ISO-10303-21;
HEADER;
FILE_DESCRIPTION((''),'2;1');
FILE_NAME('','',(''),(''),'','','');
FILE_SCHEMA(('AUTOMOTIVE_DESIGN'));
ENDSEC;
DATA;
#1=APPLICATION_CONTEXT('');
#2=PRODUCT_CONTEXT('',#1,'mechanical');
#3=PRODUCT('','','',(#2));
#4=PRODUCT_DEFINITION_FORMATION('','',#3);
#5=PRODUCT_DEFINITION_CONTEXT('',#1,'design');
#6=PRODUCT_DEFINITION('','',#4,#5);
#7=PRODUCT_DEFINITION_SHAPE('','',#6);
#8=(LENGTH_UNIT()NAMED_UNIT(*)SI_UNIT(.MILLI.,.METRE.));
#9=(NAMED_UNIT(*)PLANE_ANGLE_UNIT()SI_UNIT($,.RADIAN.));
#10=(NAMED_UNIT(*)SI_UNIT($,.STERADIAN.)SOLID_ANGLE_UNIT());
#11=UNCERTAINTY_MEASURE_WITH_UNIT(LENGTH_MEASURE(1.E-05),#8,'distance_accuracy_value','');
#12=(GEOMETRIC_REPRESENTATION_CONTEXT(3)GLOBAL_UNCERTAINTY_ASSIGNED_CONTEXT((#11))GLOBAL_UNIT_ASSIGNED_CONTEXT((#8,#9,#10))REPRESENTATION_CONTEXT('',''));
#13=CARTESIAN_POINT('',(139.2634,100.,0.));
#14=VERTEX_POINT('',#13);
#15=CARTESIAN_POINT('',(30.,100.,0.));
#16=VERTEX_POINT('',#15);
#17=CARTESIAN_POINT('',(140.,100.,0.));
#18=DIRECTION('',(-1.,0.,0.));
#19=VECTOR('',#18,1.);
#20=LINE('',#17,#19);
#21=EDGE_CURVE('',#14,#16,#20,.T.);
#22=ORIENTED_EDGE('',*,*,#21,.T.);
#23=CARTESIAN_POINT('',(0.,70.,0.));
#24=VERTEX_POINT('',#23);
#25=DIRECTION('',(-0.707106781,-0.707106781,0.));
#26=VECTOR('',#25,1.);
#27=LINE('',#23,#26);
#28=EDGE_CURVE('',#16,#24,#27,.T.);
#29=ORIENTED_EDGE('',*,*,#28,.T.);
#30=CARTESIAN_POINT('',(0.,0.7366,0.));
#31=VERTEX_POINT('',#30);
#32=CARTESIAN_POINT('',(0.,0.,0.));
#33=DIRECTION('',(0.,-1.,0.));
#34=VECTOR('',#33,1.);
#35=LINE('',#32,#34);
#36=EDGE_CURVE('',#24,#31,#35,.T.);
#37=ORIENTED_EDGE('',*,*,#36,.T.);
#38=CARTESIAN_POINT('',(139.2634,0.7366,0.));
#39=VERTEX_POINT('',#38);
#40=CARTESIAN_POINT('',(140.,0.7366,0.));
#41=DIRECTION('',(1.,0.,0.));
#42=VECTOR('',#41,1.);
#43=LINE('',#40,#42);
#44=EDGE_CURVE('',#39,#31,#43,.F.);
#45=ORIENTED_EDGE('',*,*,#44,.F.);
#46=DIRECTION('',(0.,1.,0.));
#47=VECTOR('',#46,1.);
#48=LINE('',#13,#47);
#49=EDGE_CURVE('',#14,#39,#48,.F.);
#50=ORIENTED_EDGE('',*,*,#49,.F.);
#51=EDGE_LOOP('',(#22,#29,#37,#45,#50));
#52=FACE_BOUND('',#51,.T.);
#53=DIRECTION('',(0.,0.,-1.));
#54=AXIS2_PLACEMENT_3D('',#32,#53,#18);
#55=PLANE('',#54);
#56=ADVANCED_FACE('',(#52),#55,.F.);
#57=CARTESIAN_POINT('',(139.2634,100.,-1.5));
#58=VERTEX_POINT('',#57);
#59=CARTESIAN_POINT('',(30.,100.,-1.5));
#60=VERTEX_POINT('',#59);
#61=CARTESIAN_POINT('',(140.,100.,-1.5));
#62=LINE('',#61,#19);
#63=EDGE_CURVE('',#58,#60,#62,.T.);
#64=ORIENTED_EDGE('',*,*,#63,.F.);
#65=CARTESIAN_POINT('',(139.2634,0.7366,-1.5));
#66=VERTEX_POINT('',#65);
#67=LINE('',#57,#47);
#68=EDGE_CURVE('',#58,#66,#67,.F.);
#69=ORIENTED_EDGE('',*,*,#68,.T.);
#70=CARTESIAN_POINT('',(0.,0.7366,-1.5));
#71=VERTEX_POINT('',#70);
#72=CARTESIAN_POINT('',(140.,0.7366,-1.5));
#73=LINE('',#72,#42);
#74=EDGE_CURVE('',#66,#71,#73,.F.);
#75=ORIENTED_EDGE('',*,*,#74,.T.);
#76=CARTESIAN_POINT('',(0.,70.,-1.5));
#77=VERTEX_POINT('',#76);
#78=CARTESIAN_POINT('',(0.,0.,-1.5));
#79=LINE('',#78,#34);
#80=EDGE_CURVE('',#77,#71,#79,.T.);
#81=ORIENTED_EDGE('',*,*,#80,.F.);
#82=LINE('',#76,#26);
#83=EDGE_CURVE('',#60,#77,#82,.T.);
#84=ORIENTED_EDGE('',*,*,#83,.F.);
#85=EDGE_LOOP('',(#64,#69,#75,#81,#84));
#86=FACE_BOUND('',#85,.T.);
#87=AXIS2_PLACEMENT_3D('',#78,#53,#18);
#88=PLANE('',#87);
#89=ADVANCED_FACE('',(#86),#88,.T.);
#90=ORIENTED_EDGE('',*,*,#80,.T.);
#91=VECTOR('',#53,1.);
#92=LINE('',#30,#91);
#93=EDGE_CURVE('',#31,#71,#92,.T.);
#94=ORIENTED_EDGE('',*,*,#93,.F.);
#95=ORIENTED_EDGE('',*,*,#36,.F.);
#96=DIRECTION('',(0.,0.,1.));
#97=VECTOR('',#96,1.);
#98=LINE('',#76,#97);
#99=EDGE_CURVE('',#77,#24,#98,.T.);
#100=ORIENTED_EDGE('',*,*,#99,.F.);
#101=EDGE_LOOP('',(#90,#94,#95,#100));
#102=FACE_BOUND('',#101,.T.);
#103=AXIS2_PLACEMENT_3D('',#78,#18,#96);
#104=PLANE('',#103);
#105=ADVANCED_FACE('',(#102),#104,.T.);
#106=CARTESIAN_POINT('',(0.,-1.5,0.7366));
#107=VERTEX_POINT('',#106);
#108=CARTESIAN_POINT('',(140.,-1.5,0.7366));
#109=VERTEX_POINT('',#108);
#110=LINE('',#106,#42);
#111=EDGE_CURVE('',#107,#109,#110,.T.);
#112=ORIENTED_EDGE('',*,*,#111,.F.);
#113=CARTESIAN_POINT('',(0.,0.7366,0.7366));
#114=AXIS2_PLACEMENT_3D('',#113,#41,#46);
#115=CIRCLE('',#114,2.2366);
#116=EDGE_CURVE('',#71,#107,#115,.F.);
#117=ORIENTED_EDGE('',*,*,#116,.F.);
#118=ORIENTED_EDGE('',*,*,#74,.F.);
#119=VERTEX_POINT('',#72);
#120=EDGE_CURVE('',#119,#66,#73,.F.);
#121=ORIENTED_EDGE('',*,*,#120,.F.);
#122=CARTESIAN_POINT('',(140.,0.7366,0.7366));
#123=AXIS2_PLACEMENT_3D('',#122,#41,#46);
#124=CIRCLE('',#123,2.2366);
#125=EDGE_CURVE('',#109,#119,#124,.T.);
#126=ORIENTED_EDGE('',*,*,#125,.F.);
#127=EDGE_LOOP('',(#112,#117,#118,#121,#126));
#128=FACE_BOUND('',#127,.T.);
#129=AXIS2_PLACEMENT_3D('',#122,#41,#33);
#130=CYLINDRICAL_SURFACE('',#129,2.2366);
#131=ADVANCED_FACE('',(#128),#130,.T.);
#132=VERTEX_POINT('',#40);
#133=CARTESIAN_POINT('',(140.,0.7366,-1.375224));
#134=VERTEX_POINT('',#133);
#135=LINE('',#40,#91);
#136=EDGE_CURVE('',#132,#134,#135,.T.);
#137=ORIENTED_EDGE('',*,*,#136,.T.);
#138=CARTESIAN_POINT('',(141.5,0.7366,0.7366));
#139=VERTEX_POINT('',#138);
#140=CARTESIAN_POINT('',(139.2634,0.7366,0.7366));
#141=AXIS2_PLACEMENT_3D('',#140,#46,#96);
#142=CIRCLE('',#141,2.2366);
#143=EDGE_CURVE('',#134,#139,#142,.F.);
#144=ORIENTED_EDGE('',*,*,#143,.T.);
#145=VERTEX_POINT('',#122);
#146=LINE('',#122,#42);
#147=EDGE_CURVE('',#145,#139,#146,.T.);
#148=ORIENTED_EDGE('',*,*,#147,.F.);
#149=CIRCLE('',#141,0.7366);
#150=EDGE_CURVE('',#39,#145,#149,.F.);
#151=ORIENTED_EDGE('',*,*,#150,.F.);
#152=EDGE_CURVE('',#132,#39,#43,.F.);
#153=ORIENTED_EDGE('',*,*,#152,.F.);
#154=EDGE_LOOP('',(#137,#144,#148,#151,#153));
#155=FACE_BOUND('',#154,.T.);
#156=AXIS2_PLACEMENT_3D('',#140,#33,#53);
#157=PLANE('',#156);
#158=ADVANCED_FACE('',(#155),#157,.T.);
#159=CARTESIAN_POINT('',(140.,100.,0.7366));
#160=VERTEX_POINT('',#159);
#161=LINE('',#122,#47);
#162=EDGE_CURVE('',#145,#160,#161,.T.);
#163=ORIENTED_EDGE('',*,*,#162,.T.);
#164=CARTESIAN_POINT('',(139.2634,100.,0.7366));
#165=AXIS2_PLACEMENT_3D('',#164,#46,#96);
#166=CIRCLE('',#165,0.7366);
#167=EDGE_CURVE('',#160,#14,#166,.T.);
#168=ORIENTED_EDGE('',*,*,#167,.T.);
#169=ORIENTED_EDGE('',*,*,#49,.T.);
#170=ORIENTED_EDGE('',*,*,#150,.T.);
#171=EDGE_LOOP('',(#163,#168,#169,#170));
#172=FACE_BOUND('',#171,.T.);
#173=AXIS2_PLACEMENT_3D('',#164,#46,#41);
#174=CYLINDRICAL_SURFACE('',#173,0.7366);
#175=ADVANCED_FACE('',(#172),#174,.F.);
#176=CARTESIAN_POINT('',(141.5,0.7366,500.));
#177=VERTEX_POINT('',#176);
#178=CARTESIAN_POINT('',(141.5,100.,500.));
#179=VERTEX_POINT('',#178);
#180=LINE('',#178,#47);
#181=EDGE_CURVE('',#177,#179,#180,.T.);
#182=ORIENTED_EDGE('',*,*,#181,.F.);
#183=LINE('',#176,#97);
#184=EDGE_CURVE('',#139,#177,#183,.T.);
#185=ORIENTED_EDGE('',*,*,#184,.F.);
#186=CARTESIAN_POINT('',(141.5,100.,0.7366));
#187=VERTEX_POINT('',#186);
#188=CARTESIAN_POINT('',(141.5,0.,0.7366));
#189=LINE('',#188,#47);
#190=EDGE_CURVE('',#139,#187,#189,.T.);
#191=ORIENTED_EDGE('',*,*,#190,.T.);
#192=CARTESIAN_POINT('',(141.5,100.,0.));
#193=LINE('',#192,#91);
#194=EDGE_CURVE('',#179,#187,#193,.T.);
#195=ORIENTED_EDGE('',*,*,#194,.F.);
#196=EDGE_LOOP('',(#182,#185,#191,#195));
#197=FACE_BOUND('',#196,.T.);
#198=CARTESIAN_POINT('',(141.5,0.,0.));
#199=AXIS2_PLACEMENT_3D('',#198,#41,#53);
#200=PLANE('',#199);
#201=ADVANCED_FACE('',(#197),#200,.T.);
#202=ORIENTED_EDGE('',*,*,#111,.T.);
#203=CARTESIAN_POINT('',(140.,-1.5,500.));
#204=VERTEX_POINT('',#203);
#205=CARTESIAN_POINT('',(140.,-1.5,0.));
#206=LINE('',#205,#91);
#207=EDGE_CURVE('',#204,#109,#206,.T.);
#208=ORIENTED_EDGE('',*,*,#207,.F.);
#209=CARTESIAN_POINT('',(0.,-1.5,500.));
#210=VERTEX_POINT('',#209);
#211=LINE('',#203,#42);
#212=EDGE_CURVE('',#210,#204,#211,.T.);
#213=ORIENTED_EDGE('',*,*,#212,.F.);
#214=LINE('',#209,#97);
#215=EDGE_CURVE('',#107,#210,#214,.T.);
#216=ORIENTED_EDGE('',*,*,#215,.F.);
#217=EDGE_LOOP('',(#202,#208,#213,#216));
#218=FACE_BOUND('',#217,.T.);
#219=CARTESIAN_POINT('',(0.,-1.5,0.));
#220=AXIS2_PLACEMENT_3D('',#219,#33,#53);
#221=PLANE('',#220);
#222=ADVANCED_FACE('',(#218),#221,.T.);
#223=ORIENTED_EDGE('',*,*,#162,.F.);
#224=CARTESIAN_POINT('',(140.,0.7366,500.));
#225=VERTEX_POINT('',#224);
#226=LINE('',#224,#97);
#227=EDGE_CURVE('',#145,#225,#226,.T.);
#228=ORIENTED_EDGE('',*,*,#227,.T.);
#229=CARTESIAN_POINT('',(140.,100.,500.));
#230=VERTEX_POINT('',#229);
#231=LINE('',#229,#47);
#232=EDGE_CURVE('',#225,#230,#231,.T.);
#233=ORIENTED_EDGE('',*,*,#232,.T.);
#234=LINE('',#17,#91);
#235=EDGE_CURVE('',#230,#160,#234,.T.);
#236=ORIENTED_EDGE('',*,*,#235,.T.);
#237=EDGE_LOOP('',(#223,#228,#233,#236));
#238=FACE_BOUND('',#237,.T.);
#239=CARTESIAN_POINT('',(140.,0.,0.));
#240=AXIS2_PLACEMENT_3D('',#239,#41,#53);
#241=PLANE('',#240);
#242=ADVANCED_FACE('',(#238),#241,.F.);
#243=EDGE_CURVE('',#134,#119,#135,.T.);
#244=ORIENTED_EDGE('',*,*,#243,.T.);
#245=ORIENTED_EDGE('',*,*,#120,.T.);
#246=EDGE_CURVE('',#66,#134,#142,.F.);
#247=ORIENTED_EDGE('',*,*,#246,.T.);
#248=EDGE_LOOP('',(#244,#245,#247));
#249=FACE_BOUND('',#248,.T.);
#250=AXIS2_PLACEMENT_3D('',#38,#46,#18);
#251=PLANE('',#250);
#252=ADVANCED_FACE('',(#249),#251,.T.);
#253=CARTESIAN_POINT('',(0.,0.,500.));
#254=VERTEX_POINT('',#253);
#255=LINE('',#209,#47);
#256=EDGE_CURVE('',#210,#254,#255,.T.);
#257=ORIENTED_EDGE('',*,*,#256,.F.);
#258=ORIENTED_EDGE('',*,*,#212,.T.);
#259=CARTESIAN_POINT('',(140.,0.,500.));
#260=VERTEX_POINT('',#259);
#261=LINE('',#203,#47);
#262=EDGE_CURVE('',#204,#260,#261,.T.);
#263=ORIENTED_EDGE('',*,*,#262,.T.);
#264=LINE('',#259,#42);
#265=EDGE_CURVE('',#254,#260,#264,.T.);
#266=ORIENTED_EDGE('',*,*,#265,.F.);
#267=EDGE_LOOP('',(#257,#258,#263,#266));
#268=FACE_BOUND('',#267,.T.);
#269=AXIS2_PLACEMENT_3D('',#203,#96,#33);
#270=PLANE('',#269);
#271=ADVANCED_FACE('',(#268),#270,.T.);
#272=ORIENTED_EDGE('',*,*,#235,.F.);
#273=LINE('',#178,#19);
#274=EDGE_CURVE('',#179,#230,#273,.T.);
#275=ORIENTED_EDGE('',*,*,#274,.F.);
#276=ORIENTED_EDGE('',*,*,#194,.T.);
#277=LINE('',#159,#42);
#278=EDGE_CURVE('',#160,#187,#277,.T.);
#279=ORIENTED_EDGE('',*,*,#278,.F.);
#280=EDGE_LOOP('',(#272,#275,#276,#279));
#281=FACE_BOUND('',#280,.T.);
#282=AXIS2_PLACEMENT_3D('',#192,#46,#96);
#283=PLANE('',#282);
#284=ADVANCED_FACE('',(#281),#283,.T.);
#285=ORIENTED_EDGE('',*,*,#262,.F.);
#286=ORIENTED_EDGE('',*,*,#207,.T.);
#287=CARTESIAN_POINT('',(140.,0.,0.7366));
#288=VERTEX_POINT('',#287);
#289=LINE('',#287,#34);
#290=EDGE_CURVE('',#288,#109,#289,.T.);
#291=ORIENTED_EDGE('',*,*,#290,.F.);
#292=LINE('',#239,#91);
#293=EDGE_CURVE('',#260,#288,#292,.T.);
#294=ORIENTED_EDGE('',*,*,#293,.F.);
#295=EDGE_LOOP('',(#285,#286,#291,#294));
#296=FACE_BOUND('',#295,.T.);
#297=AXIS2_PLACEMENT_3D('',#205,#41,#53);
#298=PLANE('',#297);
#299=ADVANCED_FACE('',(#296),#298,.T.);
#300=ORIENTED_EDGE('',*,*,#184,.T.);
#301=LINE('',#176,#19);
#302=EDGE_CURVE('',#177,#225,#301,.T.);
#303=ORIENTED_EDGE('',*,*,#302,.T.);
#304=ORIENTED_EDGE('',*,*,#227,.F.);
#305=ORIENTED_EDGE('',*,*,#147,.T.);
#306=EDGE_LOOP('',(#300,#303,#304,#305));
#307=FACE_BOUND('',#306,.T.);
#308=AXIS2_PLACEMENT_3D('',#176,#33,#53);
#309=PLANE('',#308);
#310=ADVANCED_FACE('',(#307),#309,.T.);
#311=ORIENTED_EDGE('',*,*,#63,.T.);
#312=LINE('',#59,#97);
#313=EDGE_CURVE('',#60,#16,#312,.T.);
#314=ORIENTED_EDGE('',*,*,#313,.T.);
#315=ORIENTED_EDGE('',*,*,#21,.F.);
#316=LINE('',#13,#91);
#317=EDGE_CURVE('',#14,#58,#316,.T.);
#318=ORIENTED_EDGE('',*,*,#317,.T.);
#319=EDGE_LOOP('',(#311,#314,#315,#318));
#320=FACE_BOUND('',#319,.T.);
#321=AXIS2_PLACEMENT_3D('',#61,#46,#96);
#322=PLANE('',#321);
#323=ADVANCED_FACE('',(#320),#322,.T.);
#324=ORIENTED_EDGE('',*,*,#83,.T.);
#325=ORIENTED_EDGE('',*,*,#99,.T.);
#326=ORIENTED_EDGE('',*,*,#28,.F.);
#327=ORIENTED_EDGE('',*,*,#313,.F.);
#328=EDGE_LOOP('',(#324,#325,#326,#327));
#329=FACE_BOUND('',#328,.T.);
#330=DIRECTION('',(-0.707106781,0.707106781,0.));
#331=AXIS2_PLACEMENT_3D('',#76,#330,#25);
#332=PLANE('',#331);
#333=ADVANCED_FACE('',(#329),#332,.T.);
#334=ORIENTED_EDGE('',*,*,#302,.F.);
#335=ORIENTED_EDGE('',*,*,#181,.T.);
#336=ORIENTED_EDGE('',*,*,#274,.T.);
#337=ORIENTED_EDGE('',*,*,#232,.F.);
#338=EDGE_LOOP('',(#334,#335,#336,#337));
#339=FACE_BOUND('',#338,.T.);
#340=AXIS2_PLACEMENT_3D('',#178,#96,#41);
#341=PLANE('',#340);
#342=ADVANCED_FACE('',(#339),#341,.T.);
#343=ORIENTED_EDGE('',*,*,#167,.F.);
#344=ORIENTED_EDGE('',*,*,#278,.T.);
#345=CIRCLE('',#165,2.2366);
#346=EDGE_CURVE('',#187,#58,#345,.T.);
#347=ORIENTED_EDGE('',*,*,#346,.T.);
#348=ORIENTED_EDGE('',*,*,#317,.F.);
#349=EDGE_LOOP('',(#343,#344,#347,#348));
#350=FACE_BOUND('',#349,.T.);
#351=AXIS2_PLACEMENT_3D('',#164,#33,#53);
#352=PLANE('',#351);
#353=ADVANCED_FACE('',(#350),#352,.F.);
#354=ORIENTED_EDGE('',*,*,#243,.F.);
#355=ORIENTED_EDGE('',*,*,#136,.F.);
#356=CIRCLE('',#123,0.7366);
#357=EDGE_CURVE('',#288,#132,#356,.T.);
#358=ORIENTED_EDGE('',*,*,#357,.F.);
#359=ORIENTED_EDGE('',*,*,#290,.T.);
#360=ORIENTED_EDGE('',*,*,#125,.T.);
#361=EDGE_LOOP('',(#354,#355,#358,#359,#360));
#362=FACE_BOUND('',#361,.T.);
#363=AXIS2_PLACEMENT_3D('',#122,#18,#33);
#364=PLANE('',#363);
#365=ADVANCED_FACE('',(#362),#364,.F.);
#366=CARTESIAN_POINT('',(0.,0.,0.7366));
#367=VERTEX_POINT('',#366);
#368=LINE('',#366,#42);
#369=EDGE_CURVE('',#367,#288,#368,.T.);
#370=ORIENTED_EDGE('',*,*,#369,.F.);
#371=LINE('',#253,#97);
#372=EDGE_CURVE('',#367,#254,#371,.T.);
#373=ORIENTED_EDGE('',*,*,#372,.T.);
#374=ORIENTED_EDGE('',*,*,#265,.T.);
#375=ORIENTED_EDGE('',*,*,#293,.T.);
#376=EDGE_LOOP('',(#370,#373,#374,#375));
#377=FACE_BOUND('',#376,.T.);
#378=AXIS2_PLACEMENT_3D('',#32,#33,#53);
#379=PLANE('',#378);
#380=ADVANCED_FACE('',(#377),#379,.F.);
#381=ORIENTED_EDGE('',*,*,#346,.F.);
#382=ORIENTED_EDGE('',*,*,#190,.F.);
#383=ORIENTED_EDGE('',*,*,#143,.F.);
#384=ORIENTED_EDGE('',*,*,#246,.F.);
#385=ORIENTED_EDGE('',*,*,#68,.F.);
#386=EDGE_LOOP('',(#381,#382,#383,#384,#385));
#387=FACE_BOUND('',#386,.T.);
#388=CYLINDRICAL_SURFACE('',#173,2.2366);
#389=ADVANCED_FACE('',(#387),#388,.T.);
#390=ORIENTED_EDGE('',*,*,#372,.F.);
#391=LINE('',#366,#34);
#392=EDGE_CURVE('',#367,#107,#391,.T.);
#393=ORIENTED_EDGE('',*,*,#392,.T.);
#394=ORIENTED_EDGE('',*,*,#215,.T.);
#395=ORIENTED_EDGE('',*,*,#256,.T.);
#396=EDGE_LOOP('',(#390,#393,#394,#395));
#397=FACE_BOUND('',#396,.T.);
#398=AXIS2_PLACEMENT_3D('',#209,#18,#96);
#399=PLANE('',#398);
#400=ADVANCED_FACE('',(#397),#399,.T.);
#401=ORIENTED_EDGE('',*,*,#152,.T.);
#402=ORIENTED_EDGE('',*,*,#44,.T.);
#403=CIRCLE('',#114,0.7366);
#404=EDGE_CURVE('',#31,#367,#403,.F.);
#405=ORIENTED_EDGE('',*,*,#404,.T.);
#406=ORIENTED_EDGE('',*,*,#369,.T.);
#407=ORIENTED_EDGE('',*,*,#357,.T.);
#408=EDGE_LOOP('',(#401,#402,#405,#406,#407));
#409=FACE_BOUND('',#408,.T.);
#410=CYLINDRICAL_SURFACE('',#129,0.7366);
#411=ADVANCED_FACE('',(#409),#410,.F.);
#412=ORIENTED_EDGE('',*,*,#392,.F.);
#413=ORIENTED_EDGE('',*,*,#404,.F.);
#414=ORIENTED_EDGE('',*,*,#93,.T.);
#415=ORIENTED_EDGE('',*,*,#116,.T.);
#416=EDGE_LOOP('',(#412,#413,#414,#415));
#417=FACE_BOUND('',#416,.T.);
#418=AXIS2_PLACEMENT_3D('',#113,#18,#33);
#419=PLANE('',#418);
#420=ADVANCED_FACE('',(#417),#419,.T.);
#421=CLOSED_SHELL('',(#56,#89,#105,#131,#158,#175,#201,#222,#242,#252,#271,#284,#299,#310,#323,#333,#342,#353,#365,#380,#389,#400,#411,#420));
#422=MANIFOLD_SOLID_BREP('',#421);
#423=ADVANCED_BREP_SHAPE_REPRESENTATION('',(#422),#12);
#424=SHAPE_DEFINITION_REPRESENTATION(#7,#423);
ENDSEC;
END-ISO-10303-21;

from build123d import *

# Parameters (mm, degrees)
TABAN_FLAN_2_DEPTH           = 1.5
KENAR_FLAN_5_STRIP_W         = 7.4732
KENAR_FLAN_5_STRIP_H         = 1.5
KENAR_FLAN_5_STRIP_CUT_DEPTH = 140
KENAR_FLAN_5_DEPTH           = 140
KENAR_FLAN_6_STRIP_W         = 7.4732
KENAR_FLAN_6_STRIP_H         = 1.5
KENAR_FLAN_6_STRIP_CUT_DEPTH = 99.2634
KENAR_FLAN_6_DEPTH           = 99.2634


# Sheet-metal steps are written as plain solids
with BuildPart() as part:
    # Çizim1 → Taban-Flanş2 (new body)
    with BuildSketch(Plane.XY):
        Polygon((0, 0), (0, 70), (30, 100), (140, 100), (140, 0), align=None)
    extrude(amount=-TABAN_FLAN_2_DEPTH)

    # Kenar-Flanş5 strip (across the edge) → Kenar-Flanş5 strip cut (cut)
    with BuildSketch(Plane.YZ):
        with Locations((-3, -0.75)):
            Rectangle(KENAR_FLAN_5_STRIP_W, KENAR_FLAN_5_STRIP_H)
    extrude(amount=KENAR_FLAN_5_STRIP_CUT_DEPTH, mode=Mode.SUBTRACT)

    # Kenar-Flanş5 section (across the edge) → Kenar-Flanş5 (add)
    with BuildSketch(Plane.YZ):
        with BuildLine():
            Line((-1.5, 0.7366), (-1.5, 500))
            Line((-1.5, 500), (0, 500))
            Line((0, 500), (0, 0.7366))
            ThreePointArc((0, 0.7366), (0.215745145, 0.215745145), (0.7366, 0))
            Line((0.7366, 0), (0.7366, -1.5))
            ThreePointArc((0.7366, -1.5), (-0.844915027, -0.844915027), (-1.5, 0.7366))
        make_face()
    extrude(amount=KENAR_FLAN_5_DEPTH)

    # Kenar-Flanş6 strip (across the edge) → Kenar-Flanş6 strip cut (cut)
    with BuildSketch(Plane(origin=(140, 0.7366, 0), x_dir=(-1, 0, 0), z_dir=(0, 1, 0))):
        with Locations((-3, -0.75)):
            Rectangle(KENAR_FLAN_6_STRIP_W, KENAR_FLAN_6_STRIP_H)
    extrude(amount=KENAR_FLAN_6_STRIP_CUT_DEPTH, mode=Mode.SUBTRACT)

    # Kenar-Flanş6 section (across the edge) → Kenar-Flanş6 (add)
    with BuildSketch(Plane(origin=(140, 0.7366, 0), x_dir=(-1, 0, 0), z_dir=(0, 1, 0))):
        with BuildLine():
            Line((-1.5, 0.7366), (-1.5, 500))
            Line((-1.5, 500), (0, 500))
            Line((0, 500), (0, 0.7366))
            ThreePointArc((0, 0.7366), (0.215745145, 0.215745145), (0.7366, 0))
            Line((0.7366, 0), (0.7366, -1.5))
            ThreePointArc((0.7366, -1.5), (-0.844915027, -0.844915027), (-1.5, 0.7366))
        make_face()
    extrude(amount=KENAR_FLAN_6_DEPTH)


solid = part.part
